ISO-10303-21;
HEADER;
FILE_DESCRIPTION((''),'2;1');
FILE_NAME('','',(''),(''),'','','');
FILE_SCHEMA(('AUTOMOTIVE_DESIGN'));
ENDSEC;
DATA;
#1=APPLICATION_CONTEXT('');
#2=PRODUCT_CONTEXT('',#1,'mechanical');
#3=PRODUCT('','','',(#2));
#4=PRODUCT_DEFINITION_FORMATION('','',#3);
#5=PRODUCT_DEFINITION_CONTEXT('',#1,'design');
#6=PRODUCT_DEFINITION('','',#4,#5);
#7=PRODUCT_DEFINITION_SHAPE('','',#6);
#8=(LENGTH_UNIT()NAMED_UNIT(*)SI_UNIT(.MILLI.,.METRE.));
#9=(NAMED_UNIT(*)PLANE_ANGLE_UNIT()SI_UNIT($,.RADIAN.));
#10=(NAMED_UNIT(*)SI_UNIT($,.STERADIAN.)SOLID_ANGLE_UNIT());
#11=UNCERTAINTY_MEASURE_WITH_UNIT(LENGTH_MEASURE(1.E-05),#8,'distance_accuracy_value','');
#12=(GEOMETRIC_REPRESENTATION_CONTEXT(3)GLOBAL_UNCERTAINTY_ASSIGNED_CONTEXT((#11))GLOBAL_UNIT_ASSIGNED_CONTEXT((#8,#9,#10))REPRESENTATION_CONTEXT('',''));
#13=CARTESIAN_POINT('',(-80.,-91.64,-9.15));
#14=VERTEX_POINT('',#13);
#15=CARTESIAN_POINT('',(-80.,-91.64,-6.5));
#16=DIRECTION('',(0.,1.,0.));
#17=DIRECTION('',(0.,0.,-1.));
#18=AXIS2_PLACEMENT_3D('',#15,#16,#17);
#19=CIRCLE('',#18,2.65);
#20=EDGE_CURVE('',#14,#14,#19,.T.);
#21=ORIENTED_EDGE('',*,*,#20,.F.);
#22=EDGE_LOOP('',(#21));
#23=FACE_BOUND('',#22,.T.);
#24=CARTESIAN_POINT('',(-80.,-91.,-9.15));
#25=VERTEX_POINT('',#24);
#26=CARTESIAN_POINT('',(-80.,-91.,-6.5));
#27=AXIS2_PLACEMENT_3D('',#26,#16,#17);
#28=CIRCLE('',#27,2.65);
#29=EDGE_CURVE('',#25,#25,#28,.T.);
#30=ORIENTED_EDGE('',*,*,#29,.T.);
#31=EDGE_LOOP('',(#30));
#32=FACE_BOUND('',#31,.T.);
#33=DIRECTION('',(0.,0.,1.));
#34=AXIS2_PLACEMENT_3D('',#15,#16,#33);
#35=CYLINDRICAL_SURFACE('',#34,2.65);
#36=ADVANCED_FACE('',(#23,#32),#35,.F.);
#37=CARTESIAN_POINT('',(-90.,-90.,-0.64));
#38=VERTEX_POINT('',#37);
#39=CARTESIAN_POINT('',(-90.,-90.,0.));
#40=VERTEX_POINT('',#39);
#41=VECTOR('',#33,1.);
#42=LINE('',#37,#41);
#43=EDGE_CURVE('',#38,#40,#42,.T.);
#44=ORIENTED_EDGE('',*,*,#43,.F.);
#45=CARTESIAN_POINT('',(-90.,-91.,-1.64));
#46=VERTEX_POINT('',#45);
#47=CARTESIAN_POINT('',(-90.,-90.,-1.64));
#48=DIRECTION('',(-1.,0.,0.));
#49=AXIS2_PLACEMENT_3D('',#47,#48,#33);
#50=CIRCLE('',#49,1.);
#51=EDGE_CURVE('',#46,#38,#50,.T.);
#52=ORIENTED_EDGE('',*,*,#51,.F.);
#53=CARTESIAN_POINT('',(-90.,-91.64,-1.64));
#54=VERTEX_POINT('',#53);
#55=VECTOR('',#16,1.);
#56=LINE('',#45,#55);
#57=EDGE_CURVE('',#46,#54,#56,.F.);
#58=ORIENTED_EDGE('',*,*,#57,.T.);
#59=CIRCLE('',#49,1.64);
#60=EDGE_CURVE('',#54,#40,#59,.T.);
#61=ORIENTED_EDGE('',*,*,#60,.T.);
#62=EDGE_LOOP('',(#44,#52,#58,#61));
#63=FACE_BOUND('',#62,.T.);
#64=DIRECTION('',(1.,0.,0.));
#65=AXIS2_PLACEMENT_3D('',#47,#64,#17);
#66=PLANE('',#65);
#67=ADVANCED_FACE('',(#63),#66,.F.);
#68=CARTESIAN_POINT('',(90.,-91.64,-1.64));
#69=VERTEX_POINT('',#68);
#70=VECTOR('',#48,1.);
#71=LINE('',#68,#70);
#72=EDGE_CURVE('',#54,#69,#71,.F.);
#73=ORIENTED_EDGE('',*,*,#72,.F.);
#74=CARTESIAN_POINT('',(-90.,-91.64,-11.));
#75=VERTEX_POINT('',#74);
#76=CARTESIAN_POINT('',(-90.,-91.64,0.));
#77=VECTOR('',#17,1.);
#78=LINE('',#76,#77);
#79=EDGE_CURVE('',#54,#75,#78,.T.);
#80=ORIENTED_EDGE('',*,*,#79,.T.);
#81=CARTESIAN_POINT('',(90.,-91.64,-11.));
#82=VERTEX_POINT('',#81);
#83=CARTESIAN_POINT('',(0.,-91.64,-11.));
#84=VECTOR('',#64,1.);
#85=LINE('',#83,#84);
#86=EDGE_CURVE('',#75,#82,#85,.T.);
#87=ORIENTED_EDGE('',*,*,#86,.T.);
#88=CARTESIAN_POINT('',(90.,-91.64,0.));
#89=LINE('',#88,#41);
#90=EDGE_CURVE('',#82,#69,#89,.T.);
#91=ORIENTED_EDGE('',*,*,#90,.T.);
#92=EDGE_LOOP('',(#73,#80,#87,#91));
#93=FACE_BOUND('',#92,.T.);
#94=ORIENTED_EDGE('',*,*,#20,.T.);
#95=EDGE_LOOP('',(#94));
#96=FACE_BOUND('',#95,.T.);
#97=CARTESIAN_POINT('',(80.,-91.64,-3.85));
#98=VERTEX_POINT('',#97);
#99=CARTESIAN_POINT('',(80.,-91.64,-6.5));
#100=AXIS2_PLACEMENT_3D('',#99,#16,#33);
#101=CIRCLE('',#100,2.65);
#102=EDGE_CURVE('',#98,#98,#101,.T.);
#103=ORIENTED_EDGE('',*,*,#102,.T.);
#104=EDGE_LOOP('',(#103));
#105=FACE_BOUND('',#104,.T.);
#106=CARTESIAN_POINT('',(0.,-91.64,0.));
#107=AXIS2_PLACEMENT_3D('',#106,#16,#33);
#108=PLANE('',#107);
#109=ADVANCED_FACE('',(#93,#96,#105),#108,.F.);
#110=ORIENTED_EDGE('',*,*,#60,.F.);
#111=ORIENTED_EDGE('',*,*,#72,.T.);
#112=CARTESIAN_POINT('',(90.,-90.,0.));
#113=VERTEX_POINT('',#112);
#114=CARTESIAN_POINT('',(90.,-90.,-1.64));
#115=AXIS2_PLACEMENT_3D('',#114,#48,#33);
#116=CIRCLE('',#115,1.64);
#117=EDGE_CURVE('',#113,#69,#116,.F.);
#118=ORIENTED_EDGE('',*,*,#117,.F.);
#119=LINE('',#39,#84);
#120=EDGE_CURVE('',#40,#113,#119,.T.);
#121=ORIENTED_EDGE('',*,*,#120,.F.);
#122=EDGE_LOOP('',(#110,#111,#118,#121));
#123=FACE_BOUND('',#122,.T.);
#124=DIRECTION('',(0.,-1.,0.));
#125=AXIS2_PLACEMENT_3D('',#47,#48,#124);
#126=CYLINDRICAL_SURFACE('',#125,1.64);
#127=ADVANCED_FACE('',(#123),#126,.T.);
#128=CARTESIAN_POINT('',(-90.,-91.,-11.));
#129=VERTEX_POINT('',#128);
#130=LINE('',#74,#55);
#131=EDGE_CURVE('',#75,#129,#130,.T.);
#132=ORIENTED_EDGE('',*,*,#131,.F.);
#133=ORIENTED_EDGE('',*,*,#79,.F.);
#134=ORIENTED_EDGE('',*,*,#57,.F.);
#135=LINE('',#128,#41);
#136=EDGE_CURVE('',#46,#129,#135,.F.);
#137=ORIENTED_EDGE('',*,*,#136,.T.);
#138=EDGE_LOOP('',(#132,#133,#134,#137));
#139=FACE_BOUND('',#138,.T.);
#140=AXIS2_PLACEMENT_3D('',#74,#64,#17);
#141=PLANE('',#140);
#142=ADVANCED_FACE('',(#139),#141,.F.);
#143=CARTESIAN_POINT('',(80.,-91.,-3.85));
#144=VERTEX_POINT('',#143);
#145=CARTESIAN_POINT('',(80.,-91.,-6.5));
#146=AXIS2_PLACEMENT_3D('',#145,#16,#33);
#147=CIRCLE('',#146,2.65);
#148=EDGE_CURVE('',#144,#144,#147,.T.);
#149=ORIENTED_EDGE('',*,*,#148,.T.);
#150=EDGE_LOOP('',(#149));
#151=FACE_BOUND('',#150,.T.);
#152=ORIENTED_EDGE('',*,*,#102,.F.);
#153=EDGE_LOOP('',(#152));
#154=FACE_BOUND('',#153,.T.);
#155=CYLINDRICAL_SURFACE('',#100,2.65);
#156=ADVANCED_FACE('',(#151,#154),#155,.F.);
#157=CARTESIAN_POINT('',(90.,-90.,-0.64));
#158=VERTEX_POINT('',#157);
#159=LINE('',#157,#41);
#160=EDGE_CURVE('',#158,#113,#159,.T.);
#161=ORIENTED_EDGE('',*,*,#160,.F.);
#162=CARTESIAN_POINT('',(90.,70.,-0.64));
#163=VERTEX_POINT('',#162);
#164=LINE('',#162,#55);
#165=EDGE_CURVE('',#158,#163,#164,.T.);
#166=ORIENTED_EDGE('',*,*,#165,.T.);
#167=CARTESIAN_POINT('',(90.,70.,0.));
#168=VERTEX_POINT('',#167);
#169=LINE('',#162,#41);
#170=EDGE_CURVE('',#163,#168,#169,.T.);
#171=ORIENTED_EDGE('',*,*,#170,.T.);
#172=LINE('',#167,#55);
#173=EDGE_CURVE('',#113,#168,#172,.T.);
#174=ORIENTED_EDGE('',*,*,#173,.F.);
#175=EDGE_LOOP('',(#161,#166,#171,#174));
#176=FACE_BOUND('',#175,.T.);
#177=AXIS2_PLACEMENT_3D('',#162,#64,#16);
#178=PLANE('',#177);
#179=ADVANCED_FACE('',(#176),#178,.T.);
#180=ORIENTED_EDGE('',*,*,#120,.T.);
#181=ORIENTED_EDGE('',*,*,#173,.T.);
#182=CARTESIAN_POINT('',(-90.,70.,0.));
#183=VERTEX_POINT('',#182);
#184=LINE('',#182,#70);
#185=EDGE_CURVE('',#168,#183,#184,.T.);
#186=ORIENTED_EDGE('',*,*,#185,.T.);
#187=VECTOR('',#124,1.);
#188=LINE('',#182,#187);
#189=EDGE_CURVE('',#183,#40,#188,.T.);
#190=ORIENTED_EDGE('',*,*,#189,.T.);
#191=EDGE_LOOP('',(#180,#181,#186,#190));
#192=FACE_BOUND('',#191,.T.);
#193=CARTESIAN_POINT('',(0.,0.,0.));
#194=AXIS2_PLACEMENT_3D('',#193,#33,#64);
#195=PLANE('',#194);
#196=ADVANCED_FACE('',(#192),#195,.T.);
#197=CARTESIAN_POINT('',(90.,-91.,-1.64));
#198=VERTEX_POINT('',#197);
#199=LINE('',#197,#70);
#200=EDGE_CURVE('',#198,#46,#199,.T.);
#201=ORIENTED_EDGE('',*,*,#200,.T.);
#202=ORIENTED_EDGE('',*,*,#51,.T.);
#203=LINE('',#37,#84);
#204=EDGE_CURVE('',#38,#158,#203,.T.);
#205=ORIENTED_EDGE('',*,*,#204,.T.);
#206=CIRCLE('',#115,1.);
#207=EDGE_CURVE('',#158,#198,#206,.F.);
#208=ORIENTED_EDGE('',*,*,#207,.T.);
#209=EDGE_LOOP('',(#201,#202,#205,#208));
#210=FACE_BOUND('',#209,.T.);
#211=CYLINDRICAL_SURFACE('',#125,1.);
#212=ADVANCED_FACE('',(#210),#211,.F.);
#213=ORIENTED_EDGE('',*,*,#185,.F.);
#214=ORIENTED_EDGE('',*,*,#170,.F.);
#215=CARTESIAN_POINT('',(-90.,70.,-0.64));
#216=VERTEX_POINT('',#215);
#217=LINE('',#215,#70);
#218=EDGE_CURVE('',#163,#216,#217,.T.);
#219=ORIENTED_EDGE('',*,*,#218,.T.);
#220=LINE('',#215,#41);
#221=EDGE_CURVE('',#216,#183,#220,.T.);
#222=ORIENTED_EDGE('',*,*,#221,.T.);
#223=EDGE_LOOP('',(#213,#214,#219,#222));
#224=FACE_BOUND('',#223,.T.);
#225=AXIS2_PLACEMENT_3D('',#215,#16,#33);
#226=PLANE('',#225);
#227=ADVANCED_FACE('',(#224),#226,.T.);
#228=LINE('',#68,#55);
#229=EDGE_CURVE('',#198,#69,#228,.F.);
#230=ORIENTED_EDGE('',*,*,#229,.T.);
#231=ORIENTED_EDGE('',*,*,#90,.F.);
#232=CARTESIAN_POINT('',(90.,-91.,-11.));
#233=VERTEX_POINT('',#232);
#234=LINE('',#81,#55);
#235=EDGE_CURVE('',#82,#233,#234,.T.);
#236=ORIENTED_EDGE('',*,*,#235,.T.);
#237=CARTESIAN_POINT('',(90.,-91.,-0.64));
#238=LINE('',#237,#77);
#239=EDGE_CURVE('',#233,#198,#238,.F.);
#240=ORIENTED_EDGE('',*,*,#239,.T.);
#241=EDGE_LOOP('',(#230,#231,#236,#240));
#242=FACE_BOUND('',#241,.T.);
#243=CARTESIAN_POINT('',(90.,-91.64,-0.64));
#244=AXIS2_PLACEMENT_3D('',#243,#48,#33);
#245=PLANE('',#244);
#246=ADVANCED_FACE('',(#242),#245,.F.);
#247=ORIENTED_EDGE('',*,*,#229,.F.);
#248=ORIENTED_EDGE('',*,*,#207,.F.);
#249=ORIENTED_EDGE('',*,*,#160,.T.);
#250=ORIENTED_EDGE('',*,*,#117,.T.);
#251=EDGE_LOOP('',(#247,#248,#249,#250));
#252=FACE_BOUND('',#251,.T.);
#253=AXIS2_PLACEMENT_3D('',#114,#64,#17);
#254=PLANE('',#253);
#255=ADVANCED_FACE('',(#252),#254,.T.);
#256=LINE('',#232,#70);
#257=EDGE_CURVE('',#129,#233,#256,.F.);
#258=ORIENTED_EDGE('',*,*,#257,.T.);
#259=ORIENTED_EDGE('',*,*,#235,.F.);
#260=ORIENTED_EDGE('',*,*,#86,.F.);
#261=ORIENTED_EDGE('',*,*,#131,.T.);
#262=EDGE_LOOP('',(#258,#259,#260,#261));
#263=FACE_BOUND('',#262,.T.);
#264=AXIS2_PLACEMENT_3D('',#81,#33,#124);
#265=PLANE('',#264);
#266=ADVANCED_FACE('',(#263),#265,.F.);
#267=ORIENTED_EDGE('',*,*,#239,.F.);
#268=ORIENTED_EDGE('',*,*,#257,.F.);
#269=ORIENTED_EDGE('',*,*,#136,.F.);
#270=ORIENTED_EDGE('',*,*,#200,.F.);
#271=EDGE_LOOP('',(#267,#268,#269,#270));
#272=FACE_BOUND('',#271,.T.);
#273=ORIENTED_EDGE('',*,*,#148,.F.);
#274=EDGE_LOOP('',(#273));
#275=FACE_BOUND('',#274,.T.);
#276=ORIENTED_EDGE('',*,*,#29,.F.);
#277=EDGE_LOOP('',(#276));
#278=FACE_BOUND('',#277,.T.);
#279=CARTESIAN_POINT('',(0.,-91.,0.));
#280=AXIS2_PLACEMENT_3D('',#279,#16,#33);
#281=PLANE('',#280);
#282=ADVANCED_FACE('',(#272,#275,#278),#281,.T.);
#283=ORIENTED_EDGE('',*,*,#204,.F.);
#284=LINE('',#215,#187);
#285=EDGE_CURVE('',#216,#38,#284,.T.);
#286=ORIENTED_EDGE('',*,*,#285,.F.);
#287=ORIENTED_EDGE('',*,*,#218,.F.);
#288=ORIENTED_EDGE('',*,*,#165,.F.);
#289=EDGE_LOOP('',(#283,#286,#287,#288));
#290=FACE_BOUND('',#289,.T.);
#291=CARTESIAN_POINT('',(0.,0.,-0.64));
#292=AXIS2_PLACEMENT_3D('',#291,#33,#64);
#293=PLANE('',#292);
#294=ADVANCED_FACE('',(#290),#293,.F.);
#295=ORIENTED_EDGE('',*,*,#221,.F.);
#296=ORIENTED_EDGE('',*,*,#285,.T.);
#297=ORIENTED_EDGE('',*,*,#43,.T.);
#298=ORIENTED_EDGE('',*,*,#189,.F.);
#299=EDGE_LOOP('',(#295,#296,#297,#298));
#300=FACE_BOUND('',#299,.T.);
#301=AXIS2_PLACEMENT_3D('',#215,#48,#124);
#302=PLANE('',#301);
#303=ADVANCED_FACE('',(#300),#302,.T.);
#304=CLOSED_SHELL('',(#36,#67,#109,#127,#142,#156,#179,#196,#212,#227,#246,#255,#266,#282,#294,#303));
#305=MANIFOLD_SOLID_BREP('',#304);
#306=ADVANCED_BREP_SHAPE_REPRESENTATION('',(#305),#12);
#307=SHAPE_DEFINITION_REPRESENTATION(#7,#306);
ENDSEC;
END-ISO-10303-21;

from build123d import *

# Parameters (mm, degrees)
SKETCH1_W          = 180
SKETCH1_H          = 160
BASE_FLANGE1_DEPTH = 0.64
EDGE_FLANGE1_DEPTH = 180
SKETCH31_R         = 2.65
CUT_EXTRUDE1_DEPTH = 185.775539507


# Sheet-metal steps are written as plain solids
with BuildPart() as part:
    # Sketch1 → Base-Flange1 (new body)
    with BuildSketch(Plane.XY):
        with Locations((0, -10)):
            Rectangle(SKETCH1_W, SKETCH1_H)
    extrude(amount=-BASE_FLANGE1_DEPTH)

    # Edge-Flange1 section (across the edge) → Edge-Flange1 (add)
    with BuildSketch(Plane(origin=(90, -91, -0.64), x_dir=(0, 1, 0), z_dir=(-1, 0, 0))):
        with BuildLine():
            Line((-0.64, 1), (-0.64, 10.36))
            Line((-0.64, 10.36), (0, 10.36))
            Line((0, 10.36), (0, 1))
            ThreePointArc((0, 1), (0.292893219, 0.292893219), (1, 0))
            Line((1, 0), (1, -0.64))
            ThreePointArc((1, -0.64), (-0.159655121, -0.159655121), (-0.64, 1))
        make_face()
    extrude(amount=EDGE_FLANGE1_DEPTH)

    # Sketch31 → Cut-Extrude1 (cut, through all)
    with BuildSketch(Plane(origin=(0, -91, 0), x_dir=(1, 0, 0), z_dir=(0, 1, 0))):
        with Locations(Location((80, 6.5, 0), (0, 0, 270))):
            Circle(SKETCH31_R)
        with Locations(Location((-80, 6.5, 0), (0, 0, 90))):
            Circle(SKETCH31_R)
    extrude(amount=-CUT_EXTRUDE1_DEPTH, mode=Mode.SUBTRACT)


solid = part.part
